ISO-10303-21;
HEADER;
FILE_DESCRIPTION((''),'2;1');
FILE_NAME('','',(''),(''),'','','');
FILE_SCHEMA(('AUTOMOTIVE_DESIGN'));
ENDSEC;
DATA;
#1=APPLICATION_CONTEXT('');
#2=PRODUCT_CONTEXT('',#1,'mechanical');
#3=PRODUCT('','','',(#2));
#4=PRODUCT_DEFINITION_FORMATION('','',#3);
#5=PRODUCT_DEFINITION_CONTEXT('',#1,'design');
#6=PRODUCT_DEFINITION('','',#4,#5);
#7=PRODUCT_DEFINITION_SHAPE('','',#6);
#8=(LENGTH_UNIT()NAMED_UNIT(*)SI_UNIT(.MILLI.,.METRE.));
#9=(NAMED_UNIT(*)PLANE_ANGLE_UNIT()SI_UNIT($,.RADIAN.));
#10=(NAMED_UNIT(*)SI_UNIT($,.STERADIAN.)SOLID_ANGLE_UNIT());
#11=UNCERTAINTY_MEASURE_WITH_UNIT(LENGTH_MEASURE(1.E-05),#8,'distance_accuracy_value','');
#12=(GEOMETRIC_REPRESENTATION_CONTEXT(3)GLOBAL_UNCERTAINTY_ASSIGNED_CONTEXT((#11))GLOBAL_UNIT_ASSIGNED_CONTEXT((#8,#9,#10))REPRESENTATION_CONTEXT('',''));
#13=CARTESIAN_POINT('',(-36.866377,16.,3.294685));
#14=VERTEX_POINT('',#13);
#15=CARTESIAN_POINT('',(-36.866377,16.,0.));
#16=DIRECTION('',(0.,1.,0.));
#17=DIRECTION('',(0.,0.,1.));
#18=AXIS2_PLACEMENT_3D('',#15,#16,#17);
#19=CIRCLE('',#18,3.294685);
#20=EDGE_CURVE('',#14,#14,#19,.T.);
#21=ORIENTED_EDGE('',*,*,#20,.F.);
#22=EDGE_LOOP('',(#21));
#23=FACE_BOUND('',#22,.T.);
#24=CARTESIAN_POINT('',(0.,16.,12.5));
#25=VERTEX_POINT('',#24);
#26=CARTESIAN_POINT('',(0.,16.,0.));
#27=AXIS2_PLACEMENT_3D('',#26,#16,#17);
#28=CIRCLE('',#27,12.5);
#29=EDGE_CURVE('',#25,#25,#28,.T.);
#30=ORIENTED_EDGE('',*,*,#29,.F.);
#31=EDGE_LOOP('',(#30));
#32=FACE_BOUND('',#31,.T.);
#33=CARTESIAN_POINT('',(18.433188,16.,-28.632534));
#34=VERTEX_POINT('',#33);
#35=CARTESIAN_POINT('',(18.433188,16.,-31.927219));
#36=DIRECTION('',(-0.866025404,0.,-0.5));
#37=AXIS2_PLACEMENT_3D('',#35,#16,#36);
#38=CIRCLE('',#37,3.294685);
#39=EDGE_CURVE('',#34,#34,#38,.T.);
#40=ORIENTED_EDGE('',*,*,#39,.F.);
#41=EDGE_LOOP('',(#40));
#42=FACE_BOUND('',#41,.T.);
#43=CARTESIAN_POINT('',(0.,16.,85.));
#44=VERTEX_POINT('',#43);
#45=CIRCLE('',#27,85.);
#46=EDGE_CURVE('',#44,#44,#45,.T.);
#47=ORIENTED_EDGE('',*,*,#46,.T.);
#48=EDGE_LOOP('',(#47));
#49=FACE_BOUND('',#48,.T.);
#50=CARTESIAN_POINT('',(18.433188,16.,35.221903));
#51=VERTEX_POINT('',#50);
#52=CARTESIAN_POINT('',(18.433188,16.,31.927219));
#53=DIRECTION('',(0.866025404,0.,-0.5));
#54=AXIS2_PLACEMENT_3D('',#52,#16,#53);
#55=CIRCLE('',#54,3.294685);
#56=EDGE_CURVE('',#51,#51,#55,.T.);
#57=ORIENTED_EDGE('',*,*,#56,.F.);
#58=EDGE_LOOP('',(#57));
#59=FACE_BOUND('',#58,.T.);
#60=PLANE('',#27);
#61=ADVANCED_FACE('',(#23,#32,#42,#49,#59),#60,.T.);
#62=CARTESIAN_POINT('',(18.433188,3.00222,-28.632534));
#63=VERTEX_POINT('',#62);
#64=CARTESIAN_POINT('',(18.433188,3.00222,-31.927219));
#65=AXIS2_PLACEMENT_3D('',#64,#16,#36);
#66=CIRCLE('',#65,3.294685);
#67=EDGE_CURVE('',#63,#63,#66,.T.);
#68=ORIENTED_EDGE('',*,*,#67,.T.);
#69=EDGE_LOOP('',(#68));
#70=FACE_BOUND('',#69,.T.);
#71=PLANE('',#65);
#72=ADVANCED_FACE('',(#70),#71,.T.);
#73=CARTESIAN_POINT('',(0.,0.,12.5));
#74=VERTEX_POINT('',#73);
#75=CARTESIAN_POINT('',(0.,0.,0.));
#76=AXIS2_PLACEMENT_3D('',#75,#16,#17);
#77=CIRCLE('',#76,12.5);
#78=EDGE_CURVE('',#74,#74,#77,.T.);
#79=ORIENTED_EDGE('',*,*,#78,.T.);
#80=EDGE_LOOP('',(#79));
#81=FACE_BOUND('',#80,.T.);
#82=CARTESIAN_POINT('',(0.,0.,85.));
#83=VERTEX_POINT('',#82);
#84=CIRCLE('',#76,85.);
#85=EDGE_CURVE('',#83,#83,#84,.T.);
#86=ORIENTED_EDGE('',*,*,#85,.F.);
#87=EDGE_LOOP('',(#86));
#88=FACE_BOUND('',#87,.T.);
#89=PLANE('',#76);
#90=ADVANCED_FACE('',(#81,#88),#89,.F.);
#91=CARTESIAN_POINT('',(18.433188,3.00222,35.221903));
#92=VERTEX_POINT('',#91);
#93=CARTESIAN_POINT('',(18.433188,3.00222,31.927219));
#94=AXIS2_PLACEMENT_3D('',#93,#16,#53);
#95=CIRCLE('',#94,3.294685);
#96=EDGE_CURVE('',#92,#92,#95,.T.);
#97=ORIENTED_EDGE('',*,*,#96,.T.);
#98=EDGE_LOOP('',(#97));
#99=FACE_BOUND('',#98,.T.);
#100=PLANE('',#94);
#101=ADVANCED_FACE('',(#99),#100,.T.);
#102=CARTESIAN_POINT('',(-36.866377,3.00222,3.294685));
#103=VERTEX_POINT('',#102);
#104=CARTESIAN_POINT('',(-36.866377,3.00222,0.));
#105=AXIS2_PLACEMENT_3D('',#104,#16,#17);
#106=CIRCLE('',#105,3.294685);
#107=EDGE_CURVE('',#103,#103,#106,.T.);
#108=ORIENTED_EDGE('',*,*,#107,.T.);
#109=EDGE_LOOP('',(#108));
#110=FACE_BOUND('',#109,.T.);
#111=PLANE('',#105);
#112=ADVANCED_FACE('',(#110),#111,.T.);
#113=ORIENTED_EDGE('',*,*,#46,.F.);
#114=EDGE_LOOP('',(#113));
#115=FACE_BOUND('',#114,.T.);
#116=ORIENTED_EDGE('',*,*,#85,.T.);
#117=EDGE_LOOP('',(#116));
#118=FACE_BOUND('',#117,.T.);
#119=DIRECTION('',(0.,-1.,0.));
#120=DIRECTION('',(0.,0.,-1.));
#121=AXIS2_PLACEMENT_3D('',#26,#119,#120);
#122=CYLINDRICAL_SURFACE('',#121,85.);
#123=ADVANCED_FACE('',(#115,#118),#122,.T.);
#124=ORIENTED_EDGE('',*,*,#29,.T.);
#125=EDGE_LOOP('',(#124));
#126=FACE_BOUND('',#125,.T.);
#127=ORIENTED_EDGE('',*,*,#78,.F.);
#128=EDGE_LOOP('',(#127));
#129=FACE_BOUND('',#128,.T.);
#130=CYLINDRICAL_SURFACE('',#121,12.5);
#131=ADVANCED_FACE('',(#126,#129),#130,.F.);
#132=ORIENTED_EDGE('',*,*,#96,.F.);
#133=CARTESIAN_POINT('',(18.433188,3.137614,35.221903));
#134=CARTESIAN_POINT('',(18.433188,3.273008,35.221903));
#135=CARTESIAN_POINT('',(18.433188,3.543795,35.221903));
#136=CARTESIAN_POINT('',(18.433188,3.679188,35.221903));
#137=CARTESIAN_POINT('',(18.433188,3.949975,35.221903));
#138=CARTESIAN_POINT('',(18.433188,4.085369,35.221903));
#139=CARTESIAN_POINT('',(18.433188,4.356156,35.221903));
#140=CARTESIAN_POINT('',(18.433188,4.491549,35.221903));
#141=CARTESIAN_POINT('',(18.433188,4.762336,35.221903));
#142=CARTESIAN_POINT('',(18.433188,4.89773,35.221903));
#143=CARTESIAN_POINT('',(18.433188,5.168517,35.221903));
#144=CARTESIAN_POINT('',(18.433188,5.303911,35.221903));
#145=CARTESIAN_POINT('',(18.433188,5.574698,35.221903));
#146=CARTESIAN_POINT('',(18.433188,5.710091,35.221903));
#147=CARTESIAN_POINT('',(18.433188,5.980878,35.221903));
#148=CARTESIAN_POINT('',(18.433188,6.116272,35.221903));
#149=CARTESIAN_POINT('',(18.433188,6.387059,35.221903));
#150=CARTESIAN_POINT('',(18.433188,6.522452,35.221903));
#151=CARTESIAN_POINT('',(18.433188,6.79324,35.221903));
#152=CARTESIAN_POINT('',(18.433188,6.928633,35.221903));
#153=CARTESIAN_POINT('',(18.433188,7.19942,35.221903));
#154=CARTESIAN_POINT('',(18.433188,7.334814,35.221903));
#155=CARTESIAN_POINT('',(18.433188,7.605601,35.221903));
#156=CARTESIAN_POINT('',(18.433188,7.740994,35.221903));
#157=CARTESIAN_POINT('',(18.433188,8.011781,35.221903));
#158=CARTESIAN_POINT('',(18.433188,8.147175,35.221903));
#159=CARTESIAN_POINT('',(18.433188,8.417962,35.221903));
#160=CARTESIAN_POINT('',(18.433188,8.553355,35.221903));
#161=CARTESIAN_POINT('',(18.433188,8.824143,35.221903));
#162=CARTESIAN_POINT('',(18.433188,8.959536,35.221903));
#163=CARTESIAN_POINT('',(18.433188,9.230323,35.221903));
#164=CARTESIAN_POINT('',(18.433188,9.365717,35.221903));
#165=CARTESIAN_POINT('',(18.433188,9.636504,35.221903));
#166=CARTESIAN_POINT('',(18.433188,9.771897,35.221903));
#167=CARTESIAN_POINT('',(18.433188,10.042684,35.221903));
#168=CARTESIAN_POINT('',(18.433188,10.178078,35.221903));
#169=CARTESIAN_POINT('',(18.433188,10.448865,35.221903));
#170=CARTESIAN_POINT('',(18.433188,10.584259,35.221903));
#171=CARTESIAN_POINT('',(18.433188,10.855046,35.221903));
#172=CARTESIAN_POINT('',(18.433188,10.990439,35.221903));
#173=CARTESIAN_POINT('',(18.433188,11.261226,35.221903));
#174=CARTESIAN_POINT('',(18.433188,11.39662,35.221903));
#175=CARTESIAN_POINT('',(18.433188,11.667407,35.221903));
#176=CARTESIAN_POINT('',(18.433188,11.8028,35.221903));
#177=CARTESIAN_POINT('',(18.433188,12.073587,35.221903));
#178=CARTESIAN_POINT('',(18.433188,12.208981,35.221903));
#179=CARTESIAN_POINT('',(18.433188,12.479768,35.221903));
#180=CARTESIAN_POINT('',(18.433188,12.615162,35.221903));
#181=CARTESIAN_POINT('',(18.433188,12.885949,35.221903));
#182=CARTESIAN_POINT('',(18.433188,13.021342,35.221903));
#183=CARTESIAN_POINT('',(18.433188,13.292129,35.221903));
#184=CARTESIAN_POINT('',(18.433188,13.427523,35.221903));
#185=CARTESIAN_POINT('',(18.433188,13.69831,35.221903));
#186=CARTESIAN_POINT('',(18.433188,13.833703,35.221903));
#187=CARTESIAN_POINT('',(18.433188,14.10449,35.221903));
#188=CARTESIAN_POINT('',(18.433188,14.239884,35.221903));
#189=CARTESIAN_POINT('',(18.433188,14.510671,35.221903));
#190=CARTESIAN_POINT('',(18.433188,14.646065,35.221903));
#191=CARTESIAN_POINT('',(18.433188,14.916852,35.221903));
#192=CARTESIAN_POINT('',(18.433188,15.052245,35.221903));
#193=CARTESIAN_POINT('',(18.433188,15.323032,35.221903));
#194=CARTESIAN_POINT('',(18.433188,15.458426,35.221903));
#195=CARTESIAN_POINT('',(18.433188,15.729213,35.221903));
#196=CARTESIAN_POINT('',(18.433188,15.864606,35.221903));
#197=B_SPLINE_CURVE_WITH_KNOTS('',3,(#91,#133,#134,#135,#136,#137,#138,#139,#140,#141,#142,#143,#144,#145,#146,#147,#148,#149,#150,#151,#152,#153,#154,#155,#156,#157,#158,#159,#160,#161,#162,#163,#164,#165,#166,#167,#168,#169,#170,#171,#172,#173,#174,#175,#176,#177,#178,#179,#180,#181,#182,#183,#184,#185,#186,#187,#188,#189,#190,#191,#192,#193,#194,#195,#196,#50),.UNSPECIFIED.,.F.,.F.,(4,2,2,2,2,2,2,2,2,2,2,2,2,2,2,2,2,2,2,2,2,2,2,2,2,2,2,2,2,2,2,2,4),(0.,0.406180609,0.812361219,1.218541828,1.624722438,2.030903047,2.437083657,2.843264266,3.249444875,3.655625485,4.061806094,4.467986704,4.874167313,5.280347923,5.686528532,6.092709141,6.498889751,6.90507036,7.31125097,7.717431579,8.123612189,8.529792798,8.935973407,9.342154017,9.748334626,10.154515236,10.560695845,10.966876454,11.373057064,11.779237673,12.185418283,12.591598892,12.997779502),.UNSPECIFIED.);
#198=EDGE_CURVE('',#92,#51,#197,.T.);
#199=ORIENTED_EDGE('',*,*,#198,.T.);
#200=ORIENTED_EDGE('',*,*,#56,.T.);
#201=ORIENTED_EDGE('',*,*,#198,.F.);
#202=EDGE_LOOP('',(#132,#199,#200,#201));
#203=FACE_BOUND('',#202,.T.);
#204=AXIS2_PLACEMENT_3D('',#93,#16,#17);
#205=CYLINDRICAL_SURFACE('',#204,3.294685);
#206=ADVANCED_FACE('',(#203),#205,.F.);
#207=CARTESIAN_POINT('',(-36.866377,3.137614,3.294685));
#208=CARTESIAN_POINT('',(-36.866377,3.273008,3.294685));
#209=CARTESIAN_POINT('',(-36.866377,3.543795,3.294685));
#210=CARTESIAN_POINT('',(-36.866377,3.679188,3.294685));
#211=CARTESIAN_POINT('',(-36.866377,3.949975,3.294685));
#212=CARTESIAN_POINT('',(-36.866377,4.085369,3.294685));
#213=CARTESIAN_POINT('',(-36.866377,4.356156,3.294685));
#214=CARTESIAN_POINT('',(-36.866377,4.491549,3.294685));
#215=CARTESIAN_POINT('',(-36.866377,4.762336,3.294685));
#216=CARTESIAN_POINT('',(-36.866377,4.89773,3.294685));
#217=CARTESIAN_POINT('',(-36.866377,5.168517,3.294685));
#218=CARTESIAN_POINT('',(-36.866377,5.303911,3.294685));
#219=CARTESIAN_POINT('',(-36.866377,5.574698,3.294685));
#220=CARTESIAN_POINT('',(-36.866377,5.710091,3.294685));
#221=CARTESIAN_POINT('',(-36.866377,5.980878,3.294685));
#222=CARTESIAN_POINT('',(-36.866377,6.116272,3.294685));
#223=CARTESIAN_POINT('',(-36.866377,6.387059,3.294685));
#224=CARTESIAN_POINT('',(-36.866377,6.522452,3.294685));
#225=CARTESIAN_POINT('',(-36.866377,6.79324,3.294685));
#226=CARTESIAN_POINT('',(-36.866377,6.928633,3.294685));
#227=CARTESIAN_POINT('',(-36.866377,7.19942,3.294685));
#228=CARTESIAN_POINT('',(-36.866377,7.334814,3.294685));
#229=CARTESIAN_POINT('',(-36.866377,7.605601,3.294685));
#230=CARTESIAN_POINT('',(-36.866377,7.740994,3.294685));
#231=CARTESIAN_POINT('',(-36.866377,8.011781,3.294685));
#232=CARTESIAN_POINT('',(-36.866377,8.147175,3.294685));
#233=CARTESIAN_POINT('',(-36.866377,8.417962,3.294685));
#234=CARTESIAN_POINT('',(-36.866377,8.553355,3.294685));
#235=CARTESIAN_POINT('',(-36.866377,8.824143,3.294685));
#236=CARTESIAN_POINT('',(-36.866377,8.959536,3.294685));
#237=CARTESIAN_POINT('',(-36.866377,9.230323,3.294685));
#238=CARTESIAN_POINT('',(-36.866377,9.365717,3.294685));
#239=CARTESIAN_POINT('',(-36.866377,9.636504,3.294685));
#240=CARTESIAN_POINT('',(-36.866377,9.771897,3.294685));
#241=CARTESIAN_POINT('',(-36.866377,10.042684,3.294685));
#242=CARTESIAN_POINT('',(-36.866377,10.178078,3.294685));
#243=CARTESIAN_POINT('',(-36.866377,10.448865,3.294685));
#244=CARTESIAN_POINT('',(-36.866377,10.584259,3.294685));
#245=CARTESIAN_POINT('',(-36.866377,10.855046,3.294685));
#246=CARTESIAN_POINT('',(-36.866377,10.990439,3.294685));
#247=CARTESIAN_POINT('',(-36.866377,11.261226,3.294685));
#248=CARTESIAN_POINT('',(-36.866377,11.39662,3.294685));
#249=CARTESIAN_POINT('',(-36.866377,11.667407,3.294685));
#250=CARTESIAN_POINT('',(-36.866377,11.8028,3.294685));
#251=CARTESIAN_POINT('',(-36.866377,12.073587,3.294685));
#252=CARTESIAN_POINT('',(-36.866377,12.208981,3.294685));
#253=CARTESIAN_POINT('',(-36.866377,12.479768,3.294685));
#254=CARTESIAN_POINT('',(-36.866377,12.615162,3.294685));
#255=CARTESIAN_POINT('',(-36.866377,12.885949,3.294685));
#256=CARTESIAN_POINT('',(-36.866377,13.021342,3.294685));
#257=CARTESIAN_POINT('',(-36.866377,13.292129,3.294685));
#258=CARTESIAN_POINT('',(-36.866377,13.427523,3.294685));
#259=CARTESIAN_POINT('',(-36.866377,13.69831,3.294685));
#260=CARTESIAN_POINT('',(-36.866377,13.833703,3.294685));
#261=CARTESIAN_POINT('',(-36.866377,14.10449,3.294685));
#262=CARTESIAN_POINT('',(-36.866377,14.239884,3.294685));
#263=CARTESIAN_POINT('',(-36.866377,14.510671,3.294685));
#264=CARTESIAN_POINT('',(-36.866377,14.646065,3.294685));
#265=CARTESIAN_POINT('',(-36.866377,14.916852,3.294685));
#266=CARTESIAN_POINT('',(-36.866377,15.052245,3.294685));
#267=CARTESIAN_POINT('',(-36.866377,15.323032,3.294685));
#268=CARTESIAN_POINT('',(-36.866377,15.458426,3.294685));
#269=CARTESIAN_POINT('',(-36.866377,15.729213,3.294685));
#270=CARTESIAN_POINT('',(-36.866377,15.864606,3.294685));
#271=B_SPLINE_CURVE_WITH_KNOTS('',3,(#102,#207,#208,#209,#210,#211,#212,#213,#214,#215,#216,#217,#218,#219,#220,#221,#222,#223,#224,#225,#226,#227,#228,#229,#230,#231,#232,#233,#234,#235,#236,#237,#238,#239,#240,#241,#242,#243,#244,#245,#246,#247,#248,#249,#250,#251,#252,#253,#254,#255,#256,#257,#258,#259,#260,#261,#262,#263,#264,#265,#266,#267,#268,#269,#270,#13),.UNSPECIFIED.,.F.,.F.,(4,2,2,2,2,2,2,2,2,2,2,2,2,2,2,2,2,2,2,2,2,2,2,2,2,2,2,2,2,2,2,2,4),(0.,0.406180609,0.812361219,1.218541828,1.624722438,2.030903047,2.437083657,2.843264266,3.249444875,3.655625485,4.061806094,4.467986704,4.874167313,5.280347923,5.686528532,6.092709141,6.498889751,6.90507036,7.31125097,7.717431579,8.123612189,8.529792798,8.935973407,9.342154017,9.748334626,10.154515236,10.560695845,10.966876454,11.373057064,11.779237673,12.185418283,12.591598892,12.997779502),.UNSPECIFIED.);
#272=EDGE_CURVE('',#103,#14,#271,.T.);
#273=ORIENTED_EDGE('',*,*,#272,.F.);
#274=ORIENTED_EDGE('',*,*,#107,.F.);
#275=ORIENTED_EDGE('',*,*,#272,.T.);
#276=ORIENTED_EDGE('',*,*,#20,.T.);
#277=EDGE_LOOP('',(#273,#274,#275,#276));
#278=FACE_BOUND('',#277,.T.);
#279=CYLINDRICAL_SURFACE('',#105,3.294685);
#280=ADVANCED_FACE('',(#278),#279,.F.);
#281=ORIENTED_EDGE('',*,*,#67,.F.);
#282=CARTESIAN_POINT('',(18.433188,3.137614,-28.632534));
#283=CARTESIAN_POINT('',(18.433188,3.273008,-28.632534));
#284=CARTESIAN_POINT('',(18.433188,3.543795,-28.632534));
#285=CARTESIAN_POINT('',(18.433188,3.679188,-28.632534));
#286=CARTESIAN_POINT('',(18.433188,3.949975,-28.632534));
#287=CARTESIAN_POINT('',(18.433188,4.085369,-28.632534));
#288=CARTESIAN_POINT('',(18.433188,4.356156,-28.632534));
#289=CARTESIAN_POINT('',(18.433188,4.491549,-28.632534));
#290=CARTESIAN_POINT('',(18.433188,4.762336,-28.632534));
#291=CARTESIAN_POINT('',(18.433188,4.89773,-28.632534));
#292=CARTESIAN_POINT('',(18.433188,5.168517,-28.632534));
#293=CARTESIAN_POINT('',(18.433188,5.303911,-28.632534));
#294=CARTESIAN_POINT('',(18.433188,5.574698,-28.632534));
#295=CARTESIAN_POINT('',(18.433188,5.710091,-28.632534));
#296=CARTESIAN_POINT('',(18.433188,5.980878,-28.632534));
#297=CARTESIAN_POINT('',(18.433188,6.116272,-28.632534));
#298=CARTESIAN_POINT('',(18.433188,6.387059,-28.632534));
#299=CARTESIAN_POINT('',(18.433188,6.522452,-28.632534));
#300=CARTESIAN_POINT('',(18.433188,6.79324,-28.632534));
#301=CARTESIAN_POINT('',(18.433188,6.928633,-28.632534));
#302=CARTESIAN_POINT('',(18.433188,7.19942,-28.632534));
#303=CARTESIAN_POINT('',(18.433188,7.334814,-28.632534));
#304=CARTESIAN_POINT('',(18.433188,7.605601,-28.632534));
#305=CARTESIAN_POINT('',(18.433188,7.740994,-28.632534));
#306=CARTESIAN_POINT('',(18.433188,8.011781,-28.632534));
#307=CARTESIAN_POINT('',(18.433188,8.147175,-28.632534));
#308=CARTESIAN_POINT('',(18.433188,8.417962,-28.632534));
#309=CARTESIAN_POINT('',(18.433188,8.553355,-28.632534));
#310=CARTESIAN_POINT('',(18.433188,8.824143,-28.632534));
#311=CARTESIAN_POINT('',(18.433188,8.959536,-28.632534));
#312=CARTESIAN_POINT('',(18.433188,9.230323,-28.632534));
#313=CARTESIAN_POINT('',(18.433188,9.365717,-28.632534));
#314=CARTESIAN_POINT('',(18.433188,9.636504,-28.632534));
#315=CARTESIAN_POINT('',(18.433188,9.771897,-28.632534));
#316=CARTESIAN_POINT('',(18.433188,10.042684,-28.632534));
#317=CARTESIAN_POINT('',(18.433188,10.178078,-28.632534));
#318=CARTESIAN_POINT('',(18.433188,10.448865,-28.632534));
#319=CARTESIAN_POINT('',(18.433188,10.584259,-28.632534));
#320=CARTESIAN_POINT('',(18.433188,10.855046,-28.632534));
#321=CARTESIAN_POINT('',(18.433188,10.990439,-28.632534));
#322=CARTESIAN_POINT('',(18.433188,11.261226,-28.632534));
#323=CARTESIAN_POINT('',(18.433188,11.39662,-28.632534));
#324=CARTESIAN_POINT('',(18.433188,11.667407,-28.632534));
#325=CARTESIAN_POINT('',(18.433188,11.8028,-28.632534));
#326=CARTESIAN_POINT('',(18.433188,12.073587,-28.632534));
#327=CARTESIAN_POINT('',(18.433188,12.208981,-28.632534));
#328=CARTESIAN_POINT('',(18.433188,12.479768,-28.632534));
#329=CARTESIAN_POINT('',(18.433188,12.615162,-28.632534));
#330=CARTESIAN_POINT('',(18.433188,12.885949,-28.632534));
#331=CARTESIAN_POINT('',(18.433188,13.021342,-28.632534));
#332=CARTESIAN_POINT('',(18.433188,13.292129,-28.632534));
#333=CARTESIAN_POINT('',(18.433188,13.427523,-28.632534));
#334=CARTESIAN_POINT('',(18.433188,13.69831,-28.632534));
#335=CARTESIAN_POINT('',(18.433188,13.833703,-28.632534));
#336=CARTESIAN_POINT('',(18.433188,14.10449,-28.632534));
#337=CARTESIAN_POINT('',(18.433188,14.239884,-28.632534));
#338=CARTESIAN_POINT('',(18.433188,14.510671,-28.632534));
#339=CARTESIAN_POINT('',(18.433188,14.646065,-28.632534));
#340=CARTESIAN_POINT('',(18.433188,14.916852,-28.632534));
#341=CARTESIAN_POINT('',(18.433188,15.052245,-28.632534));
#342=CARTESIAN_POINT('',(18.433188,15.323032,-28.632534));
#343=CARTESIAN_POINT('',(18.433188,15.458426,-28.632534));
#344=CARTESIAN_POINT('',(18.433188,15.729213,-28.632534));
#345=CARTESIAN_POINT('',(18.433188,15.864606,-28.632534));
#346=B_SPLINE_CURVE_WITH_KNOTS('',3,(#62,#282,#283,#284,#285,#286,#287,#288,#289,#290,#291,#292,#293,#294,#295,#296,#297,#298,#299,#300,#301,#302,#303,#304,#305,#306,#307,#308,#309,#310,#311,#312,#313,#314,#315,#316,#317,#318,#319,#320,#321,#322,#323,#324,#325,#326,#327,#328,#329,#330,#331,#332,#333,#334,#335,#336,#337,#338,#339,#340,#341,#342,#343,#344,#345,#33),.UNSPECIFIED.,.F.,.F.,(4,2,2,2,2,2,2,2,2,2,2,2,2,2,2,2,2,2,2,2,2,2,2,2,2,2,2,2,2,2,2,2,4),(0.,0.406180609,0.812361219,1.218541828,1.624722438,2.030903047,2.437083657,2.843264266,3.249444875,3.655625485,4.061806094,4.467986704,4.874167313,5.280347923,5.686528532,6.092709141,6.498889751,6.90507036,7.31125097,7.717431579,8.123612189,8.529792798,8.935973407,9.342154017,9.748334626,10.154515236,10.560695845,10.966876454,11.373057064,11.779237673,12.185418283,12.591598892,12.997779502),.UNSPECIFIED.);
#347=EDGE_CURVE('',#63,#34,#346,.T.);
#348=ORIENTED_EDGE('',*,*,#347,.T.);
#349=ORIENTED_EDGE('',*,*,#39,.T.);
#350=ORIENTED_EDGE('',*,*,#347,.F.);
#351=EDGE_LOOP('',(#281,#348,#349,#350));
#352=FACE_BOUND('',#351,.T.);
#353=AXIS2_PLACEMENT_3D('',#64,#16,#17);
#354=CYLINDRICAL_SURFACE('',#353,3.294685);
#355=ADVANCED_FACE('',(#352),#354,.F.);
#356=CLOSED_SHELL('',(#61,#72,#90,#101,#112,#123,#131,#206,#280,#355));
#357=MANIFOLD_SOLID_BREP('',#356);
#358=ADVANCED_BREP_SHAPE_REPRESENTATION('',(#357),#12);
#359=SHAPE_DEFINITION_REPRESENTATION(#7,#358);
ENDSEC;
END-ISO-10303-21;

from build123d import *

# Parameters (mm, degrees)
SKETCH1_R           = 85
BOSS_EXTRUDE1_DEPTH = 16
SKETCH2_R           = 12.5
CUT_EXTRUDE1_DEPTH  = 122.268297588
SKETCH3_R           = 3.294684627
CUT_EXTRUDE2_DEPTH  = 12.997779502
CIRPATTERN1_COUNT   = 3


with BuildPart() as part:
    # Sketch1 → Boss-Extrude1 (new body)
    with BuildSketch(Plane(origin=(0, 0, 0), x_dir=(1, 0, 0), z_dir=(0, 1, 0))):
        Circle(SKETCH1_R)
    extrude(amount=BOSS_EXTRUDE1_DEPTH)

    # Sketch2 → Cut-Extrude1 (cut, through all)
    with BuildSketch(Plane(origin=(0, 0, 0), x_dir=(1, 0, 0), z_dir=(0, 1, 0))):
        Circle(SKETCH2_R)
    extrude(amount=CUT_EXTRUDE1_DEPTH, mode=Mode.SUBTRACT)

    # Sketch3 → Cut-Extrude2 (cut)
    with BuildSketch(Plane(origin=(0, 16, 0), x_dir=(1, 0, 0), z_dir=(0, 1, 0))):
        with Locations((-36.866376714, 0)):
            Circle(SKETCH3_R)
    cut_extrude2 = extrude(amount=-CUT_EXTRUDE2_DEPTH, mode=Mode.SUBTRACT)

    # CirPattern1: Cut-Extrude2 ×3 about axis
    cirpattern1_axis = Axis((0, 0, 0), (0, 1, 0))
    for i in range(1, CIRPATTERN1_COUNT):
        add(cut_extrude2.rotate(cirpattern1_axis, i * 360 / CIRPATTERN1_COUNT), mode=Mode.SUBTRACT)


solid = part.part
